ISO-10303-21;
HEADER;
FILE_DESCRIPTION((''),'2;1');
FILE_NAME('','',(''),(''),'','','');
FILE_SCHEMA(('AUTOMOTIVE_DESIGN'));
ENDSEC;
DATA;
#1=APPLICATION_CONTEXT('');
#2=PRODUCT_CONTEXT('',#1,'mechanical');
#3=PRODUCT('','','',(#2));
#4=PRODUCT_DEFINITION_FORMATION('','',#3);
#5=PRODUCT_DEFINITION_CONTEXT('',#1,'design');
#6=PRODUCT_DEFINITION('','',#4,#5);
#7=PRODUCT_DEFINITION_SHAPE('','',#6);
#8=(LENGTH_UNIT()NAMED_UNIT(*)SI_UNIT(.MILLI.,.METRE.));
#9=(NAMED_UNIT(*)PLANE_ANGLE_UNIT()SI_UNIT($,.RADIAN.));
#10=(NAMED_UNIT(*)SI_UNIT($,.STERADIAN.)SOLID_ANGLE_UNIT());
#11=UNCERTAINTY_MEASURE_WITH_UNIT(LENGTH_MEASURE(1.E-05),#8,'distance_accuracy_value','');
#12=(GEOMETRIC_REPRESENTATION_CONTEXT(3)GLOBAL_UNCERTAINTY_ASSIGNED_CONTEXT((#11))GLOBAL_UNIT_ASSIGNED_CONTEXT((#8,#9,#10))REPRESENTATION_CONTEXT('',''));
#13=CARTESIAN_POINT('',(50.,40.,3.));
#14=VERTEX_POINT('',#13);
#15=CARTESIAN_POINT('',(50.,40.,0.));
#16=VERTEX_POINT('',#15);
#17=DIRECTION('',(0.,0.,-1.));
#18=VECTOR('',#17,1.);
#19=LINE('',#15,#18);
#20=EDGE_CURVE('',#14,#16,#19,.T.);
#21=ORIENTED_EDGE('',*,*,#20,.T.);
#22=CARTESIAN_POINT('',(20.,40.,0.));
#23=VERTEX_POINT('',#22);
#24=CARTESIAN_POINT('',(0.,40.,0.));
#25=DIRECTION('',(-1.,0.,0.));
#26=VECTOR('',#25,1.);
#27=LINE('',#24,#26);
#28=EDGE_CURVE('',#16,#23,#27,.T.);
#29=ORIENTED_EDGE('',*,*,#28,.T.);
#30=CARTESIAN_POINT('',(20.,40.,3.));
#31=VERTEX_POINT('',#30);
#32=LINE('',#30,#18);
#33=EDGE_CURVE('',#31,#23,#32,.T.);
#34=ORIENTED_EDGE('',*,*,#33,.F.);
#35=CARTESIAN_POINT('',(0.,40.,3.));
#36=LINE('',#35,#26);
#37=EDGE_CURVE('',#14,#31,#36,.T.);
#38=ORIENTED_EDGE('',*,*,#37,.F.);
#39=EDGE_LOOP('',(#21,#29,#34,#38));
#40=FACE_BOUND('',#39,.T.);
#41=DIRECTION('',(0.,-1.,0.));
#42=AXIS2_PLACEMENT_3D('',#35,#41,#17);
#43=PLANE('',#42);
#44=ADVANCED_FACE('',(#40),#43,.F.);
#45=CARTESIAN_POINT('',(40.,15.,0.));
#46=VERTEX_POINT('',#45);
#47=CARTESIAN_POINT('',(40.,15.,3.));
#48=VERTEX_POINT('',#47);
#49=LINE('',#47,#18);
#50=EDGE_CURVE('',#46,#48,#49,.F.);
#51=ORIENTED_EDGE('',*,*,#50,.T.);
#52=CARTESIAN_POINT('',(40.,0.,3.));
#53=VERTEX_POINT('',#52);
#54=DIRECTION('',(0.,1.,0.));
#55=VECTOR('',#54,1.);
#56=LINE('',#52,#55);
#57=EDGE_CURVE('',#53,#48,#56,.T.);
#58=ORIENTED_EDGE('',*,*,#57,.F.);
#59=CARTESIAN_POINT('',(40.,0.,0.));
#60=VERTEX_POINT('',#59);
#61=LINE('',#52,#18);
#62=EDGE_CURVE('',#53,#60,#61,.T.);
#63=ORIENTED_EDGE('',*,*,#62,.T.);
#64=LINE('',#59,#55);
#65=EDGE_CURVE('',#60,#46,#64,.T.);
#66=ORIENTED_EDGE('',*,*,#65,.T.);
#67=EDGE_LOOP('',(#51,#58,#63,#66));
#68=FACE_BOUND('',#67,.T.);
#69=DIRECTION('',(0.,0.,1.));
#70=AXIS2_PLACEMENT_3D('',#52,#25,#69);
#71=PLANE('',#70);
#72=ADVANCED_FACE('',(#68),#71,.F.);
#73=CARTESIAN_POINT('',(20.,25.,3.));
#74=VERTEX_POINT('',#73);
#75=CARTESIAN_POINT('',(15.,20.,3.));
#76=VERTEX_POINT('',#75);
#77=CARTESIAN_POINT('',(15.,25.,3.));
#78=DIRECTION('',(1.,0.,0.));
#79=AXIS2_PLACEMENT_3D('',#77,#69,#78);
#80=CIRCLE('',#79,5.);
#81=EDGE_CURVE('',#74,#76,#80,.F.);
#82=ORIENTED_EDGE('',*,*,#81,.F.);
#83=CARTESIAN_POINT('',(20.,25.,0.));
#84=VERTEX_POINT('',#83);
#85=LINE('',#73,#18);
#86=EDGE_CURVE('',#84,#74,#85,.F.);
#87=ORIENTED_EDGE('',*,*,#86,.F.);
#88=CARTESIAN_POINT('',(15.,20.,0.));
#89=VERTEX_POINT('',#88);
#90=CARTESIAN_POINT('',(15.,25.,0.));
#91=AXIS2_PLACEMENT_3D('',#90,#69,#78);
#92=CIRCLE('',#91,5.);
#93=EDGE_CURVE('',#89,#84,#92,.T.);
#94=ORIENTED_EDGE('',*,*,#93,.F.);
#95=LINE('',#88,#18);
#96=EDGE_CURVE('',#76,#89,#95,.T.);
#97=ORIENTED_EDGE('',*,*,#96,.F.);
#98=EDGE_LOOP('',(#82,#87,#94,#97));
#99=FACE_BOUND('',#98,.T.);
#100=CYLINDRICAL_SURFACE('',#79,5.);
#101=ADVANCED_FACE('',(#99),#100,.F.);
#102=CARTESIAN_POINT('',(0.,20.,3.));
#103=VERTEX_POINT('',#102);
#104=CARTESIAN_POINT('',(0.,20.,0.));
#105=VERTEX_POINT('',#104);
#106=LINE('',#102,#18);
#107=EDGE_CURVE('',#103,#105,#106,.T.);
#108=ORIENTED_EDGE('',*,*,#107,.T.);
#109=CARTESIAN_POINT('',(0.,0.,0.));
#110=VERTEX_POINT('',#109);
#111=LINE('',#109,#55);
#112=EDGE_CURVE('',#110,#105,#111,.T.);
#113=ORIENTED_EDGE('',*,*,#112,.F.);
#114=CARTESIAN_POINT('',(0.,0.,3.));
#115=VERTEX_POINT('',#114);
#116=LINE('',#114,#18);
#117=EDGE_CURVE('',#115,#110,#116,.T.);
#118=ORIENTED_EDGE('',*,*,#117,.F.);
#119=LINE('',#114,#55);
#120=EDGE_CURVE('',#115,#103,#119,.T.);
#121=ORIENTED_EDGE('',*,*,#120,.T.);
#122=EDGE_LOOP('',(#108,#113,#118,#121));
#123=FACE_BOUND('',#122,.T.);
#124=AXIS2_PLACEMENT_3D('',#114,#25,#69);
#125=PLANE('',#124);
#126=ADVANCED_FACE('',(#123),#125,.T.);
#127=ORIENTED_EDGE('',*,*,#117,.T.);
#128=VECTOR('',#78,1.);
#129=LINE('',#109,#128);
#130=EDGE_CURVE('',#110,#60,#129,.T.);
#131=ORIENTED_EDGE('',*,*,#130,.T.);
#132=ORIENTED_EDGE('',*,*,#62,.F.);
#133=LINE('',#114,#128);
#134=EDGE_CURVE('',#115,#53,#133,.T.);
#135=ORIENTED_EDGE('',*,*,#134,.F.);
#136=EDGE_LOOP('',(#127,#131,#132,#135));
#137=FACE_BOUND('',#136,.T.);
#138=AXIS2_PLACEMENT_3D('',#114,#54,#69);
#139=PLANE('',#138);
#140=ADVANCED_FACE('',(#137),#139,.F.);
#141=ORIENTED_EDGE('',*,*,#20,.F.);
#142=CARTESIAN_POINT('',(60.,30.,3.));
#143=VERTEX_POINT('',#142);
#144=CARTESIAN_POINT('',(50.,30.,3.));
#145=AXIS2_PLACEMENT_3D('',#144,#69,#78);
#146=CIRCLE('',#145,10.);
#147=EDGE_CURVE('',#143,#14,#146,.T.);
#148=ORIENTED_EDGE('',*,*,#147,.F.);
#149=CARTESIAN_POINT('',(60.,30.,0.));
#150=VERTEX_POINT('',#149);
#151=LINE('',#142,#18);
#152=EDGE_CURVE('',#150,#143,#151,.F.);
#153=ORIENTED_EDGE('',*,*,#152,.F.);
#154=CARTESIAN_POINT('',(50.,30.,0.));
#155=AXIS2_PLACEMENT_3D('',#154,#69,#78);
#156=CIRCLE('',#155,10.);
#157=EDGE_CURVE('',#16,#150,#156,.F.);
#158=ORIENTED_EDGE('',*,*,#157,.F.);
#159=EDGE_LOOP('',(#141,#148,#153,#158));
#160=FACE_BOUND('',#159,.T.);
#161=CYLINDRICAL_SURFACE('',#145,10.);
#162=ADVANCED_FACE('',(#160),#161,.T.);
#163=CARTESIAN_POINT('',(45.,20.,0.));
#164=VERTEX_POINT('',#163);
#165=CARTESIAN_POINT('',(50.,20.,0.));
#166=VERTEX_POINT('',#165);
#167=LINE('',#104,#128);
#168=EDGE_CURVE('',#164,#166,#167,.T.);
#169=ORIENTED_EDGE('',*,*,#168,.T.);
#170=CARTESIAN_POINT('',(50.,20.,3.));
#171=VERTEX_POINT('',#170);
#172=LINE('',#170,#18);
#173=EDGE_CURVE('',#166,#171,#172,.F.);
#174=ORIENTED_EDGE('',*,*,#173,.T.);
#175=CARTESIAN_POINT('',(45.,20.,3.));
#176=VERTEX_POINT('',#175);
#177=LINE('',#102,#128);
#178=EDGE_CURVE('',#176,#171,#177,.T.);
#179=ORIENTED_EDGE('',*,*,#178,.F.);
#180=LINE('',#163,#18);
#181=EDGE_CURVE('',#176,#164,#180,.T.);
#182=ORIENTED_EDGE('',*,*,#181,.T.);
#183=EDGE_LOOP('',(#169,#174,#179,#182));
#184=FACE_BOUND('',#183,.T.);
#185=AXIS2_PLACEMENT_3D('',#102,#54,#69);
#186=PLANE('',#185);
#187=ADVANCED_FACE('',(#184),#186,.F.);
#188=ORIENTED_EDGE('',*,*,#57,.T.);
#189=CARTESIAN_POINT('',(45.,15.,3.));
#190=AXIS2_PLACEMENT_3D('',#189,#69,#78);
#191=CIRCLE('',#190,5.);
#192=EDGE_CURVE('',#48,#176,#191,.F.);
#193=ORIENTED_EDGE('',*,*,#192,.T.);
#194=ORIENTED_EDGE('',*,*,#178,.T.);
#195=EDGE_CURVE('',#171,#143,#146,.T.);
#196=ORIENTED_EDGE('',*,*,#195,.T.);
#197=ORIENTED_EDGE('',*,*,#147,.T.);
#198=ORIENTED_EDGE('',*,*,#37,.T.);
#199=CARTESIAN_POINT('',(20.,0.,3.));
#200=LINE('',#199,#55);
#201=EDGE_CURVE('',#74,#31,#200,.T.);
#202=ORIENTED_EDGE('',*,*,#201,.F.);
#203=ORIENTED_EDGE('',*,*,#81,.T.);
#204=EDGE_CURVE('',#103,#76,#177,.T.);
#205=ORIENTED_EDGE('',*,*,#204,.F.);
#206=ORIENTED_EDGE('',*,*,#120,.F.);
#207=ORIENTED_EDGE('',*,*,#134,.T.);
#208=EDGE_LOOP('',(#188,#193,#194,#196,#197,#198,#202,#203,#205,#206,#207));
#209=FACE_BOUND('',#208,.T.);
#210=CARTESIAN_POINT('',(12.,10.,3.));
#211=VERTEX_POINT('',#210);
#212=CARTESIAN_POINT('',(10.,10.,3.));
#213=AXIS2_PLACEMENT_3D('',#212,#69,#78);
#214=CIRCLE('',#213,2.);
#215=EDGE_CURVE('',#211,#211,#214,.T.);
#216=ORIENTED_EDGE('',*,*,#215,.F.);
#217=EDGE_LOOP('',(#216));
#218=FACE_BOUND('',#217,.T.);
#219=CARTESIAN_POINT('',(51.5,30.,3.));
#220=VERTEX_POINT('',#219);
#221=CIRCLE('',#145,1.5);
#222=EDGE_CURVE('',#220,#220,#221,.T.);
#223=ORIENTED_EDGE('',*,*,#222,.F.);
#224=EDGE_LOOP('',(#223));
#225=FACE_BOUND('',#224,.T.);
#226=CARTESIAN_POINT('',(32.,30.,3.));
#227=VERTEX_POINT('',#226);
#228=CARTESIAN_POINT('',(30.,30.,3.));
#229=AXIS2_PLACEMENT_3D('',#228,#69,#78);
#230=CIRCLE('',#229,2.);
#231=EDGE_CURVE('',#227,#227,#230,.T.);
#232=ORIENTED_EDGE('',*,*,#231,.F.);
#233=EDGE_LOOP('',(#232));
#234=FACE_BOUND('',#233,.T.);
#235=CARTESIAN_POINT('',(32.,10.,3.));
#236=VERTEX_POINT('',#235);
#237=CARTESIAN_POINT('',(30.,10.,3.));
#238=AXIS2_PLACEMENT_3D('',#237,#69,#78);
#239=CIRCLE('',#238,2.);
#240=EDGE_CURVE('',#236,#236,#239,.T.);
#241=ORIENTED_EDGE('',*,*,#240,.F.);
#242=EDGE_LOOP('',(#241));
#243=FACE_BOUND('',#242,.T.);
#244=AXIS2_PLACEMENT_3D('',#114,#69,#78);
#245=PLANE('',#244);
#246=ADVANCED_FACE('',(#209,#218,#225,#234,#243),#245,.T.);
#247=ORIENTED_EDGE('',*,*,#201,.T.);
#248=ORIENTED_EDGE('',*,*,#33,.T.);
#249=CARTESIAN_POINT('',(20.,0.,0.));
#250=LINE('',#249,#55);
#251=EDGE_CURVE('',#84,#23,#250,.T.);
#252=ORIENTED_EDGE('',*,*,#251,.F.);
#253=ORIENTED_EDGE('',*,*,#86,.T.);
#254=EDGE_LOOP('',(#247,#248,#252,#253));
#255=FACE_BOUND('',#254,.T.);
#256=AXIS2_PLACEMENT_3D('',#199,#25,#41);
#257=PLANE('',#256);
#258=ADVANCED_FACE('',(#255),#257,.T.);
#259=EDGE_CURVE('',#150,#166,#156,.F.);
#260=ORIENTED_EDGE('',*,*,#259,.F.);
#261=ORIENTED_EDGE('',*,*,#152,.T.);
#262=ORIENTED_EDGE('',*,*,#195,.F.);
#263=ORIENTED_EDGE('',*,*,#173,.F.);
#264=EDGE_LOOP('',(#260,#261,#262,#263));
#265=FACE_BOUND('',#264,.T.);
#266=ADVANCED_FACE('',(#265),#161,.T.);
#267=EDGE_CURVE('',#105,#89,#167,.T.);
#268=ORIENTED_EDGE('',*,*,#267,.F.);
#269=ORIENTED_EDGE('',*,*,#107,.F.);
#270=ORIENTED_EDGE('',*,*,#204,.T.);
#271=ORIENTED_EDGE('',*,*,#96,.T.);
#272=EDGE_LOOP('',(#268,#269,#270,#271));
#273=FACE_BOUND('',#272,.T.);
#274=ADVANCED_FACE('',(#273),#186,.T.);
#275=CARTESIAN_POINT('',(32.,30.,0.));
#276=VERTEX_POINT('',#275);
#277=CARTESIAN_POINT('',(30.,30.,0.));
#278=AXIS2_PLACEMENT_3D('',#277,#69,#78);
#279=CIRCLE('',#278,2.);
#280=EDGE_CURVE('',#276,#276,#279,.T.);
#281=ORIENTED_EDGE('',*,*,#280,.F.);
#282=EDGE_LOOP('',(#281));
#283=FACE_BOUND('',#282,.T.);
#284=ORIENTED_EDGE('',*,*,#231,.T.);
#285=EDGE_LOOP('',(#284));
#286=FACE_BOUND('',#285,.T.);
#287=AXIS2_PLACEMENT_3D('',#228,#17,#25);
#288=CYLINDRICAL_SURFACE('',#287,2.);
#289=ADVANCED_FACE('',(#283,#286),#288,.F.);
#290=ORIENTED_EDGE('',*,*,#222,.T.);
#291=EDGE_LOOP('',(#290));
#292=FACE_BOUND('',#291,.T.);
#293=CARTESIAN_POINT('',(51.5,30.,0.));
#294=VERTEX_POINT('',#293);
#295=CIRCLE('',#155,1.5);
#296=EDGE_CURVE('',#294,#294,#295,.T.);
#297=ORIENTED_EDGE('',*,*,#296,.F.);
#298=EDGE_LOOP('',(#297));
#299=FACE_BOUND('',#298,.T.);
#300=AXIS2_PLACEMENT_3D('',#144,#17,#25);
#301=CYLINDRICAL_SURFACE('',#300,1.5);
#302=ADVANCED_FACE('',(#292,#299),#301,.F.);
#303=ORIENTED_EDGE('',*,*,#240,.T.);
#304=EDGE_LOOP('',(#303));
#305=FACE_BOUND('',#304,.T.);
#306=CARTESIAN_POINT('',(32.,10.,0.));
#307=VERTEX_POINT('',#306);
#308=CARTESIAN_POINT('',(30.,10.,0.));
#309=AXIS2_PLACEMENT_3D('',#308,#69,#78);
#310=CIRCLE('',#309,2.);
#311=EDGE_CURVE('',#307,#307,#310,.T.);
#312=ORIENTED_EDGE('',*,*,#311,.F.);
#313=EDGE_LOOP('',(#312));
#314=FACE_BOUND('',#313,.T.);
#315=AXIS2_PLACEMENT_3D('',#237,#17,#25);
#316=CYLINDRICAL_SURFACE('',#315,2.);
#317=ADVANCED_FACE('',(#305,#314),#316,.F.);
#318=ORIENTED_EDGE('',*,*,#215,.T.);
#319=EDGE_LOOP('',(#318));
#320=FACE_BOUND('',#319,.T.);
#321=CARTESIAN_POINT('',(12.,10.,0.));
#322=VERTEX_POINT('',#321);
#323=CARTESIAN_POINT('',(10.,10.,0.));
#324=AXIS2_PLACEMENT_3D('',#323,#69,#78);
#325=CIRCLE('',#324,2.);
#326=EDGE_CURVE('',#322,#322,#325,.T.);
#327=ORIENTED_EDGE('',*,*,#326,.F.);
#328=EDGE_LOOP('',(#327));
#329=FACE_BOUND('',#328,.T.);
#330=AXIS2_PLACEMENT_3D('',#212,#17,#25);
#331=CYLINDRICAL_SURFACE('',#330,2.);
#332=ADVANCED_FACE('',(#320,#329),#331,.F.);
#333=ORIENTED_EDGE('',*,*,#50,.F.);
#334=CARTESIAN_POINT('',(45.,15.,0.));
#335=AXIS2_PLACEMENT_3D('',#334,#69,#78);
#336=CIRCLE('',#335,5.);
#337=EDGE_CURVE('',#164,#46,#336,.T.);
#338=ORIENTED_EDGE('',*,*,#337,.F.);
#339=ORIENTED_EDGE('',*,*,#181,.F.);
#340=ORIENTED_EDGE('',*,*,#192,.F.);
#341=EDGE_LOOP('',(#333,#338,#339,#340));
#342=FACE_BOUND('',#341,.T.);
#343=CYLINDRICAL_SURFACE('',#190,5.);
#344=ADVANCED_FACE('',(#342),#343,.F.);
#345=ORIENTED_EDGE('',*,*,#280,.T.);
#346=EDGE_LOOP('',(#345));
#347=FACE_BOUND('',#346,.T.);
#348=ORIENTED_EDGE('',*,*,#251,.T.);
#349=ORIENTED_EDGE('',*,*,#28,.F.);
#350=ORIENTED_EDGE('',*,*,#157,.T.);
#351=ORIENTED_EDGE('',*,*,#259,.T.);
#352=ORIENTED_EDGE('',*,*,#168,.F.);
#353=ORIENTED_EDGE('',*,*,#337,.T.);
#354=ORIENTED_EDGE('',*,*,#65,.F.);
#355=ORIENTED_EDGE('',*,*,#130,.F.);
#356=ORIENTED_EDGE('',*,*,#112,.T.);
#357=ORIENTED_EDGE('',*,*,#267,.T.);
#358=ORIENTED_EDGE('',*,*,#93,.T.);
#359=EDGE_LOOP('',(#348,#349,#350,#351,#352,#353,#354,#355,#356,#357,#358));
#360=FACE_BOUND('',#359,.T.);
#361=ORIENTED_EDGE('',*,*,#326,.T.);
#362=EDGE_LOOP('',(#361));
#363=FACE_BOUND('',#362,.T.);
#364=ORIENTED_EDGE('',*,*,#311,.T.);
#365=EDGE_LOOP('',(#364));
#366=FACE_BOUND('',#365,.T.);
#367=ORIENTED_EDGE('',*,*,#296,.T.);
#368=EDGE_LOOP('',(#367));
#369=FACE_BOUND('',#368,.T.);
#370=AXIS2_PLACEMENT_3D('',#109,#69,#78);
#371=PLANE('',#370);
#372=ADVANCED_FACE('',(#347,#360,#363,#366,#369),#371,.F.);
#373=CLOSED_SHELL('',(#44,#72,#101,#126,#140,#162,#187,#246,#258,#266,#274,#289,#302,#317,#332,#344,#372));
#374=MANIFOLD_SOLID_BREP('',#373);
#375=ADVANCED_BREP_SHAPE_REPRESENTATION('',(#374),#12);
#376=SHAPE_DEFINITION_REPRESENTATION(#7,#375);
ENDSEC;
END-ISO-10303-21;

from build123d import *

# Parameters (mm, degrees)
ESBO_O1_W                = 20
ESBO_O1_H                = 20
ESBO_O1_R                = 2
ESBO_O1_R_2              = 1.5
RESSALTO_EXTRUS_O1_DEPTH = 3
FILETE1_R                = 10
FILETE2_R                = 5


with BuildPart() as part:
    # Esboço1 → Ressalto-extrusão1 (new body)
    # profile 1 of 4: a face of its own
    with BuildSketch(Plane.XY):
        with Locations((10, 10)):
            Rectangle(ESBO_O1_W, ESBO_O1_H)
        with Locations((10, 10)):
            Circle(ESBO_O1_R, mode=Mode.SUBTRACT)
    # profile 2 of 4: a face of its own
    with BuildSketch(Plane.XY):
        with Locations((30, 10)):
            Rectangle(ESBO_O1_W, ESBO_O1_H)
        with Locations((30, 10)):
            Circle(ESBO_O1_R, mode=Mode.SUBTRACT)
    # profile 3 of 4: a face of its own
    with BuildSketch(Plane.XY):
        with Locations((30, 30)):
            Rectangle(ESBO_O1_W, ESBO_O1_H)
        with Locations((30, 30)):
            Circle(ESBO_O1_R, mode=Mode.SUBTRACT)
    # profile 4 of 4: a face of its own
    with BuildSketch(Plane.XY):
        with Locations((50, 30)):
            Rectangle(ESBO_O1_W, ESBO_O1_H)
        with Locations((50, 30)):
            Circle(ESBO_O1_R_2, mode=Mode.SUBTRACT)
    extrude(amount=RESSALTO_EXTRUS_O1_DEPTH)

    # Filete1
    filete1_edges = [part.edges().sort_by_distance(p)[0] for p in [
        (60, 20, 1.5),
        (60, 40, 1.5),
    ]]
    fillet(filete1_edges, radius=FILETE1_R - 0.0001)  # a hair under: the kernel refuses the full size

    # Filete2
    filete2_edges = [part.edges().sort_by_distance(p)[0] for p in [
        (20, 20, 1.5),
        (40, 20, 1.5),
    ]]
    fillet(filete2_edges, radius=FILETE2_R)


solid = part.part
